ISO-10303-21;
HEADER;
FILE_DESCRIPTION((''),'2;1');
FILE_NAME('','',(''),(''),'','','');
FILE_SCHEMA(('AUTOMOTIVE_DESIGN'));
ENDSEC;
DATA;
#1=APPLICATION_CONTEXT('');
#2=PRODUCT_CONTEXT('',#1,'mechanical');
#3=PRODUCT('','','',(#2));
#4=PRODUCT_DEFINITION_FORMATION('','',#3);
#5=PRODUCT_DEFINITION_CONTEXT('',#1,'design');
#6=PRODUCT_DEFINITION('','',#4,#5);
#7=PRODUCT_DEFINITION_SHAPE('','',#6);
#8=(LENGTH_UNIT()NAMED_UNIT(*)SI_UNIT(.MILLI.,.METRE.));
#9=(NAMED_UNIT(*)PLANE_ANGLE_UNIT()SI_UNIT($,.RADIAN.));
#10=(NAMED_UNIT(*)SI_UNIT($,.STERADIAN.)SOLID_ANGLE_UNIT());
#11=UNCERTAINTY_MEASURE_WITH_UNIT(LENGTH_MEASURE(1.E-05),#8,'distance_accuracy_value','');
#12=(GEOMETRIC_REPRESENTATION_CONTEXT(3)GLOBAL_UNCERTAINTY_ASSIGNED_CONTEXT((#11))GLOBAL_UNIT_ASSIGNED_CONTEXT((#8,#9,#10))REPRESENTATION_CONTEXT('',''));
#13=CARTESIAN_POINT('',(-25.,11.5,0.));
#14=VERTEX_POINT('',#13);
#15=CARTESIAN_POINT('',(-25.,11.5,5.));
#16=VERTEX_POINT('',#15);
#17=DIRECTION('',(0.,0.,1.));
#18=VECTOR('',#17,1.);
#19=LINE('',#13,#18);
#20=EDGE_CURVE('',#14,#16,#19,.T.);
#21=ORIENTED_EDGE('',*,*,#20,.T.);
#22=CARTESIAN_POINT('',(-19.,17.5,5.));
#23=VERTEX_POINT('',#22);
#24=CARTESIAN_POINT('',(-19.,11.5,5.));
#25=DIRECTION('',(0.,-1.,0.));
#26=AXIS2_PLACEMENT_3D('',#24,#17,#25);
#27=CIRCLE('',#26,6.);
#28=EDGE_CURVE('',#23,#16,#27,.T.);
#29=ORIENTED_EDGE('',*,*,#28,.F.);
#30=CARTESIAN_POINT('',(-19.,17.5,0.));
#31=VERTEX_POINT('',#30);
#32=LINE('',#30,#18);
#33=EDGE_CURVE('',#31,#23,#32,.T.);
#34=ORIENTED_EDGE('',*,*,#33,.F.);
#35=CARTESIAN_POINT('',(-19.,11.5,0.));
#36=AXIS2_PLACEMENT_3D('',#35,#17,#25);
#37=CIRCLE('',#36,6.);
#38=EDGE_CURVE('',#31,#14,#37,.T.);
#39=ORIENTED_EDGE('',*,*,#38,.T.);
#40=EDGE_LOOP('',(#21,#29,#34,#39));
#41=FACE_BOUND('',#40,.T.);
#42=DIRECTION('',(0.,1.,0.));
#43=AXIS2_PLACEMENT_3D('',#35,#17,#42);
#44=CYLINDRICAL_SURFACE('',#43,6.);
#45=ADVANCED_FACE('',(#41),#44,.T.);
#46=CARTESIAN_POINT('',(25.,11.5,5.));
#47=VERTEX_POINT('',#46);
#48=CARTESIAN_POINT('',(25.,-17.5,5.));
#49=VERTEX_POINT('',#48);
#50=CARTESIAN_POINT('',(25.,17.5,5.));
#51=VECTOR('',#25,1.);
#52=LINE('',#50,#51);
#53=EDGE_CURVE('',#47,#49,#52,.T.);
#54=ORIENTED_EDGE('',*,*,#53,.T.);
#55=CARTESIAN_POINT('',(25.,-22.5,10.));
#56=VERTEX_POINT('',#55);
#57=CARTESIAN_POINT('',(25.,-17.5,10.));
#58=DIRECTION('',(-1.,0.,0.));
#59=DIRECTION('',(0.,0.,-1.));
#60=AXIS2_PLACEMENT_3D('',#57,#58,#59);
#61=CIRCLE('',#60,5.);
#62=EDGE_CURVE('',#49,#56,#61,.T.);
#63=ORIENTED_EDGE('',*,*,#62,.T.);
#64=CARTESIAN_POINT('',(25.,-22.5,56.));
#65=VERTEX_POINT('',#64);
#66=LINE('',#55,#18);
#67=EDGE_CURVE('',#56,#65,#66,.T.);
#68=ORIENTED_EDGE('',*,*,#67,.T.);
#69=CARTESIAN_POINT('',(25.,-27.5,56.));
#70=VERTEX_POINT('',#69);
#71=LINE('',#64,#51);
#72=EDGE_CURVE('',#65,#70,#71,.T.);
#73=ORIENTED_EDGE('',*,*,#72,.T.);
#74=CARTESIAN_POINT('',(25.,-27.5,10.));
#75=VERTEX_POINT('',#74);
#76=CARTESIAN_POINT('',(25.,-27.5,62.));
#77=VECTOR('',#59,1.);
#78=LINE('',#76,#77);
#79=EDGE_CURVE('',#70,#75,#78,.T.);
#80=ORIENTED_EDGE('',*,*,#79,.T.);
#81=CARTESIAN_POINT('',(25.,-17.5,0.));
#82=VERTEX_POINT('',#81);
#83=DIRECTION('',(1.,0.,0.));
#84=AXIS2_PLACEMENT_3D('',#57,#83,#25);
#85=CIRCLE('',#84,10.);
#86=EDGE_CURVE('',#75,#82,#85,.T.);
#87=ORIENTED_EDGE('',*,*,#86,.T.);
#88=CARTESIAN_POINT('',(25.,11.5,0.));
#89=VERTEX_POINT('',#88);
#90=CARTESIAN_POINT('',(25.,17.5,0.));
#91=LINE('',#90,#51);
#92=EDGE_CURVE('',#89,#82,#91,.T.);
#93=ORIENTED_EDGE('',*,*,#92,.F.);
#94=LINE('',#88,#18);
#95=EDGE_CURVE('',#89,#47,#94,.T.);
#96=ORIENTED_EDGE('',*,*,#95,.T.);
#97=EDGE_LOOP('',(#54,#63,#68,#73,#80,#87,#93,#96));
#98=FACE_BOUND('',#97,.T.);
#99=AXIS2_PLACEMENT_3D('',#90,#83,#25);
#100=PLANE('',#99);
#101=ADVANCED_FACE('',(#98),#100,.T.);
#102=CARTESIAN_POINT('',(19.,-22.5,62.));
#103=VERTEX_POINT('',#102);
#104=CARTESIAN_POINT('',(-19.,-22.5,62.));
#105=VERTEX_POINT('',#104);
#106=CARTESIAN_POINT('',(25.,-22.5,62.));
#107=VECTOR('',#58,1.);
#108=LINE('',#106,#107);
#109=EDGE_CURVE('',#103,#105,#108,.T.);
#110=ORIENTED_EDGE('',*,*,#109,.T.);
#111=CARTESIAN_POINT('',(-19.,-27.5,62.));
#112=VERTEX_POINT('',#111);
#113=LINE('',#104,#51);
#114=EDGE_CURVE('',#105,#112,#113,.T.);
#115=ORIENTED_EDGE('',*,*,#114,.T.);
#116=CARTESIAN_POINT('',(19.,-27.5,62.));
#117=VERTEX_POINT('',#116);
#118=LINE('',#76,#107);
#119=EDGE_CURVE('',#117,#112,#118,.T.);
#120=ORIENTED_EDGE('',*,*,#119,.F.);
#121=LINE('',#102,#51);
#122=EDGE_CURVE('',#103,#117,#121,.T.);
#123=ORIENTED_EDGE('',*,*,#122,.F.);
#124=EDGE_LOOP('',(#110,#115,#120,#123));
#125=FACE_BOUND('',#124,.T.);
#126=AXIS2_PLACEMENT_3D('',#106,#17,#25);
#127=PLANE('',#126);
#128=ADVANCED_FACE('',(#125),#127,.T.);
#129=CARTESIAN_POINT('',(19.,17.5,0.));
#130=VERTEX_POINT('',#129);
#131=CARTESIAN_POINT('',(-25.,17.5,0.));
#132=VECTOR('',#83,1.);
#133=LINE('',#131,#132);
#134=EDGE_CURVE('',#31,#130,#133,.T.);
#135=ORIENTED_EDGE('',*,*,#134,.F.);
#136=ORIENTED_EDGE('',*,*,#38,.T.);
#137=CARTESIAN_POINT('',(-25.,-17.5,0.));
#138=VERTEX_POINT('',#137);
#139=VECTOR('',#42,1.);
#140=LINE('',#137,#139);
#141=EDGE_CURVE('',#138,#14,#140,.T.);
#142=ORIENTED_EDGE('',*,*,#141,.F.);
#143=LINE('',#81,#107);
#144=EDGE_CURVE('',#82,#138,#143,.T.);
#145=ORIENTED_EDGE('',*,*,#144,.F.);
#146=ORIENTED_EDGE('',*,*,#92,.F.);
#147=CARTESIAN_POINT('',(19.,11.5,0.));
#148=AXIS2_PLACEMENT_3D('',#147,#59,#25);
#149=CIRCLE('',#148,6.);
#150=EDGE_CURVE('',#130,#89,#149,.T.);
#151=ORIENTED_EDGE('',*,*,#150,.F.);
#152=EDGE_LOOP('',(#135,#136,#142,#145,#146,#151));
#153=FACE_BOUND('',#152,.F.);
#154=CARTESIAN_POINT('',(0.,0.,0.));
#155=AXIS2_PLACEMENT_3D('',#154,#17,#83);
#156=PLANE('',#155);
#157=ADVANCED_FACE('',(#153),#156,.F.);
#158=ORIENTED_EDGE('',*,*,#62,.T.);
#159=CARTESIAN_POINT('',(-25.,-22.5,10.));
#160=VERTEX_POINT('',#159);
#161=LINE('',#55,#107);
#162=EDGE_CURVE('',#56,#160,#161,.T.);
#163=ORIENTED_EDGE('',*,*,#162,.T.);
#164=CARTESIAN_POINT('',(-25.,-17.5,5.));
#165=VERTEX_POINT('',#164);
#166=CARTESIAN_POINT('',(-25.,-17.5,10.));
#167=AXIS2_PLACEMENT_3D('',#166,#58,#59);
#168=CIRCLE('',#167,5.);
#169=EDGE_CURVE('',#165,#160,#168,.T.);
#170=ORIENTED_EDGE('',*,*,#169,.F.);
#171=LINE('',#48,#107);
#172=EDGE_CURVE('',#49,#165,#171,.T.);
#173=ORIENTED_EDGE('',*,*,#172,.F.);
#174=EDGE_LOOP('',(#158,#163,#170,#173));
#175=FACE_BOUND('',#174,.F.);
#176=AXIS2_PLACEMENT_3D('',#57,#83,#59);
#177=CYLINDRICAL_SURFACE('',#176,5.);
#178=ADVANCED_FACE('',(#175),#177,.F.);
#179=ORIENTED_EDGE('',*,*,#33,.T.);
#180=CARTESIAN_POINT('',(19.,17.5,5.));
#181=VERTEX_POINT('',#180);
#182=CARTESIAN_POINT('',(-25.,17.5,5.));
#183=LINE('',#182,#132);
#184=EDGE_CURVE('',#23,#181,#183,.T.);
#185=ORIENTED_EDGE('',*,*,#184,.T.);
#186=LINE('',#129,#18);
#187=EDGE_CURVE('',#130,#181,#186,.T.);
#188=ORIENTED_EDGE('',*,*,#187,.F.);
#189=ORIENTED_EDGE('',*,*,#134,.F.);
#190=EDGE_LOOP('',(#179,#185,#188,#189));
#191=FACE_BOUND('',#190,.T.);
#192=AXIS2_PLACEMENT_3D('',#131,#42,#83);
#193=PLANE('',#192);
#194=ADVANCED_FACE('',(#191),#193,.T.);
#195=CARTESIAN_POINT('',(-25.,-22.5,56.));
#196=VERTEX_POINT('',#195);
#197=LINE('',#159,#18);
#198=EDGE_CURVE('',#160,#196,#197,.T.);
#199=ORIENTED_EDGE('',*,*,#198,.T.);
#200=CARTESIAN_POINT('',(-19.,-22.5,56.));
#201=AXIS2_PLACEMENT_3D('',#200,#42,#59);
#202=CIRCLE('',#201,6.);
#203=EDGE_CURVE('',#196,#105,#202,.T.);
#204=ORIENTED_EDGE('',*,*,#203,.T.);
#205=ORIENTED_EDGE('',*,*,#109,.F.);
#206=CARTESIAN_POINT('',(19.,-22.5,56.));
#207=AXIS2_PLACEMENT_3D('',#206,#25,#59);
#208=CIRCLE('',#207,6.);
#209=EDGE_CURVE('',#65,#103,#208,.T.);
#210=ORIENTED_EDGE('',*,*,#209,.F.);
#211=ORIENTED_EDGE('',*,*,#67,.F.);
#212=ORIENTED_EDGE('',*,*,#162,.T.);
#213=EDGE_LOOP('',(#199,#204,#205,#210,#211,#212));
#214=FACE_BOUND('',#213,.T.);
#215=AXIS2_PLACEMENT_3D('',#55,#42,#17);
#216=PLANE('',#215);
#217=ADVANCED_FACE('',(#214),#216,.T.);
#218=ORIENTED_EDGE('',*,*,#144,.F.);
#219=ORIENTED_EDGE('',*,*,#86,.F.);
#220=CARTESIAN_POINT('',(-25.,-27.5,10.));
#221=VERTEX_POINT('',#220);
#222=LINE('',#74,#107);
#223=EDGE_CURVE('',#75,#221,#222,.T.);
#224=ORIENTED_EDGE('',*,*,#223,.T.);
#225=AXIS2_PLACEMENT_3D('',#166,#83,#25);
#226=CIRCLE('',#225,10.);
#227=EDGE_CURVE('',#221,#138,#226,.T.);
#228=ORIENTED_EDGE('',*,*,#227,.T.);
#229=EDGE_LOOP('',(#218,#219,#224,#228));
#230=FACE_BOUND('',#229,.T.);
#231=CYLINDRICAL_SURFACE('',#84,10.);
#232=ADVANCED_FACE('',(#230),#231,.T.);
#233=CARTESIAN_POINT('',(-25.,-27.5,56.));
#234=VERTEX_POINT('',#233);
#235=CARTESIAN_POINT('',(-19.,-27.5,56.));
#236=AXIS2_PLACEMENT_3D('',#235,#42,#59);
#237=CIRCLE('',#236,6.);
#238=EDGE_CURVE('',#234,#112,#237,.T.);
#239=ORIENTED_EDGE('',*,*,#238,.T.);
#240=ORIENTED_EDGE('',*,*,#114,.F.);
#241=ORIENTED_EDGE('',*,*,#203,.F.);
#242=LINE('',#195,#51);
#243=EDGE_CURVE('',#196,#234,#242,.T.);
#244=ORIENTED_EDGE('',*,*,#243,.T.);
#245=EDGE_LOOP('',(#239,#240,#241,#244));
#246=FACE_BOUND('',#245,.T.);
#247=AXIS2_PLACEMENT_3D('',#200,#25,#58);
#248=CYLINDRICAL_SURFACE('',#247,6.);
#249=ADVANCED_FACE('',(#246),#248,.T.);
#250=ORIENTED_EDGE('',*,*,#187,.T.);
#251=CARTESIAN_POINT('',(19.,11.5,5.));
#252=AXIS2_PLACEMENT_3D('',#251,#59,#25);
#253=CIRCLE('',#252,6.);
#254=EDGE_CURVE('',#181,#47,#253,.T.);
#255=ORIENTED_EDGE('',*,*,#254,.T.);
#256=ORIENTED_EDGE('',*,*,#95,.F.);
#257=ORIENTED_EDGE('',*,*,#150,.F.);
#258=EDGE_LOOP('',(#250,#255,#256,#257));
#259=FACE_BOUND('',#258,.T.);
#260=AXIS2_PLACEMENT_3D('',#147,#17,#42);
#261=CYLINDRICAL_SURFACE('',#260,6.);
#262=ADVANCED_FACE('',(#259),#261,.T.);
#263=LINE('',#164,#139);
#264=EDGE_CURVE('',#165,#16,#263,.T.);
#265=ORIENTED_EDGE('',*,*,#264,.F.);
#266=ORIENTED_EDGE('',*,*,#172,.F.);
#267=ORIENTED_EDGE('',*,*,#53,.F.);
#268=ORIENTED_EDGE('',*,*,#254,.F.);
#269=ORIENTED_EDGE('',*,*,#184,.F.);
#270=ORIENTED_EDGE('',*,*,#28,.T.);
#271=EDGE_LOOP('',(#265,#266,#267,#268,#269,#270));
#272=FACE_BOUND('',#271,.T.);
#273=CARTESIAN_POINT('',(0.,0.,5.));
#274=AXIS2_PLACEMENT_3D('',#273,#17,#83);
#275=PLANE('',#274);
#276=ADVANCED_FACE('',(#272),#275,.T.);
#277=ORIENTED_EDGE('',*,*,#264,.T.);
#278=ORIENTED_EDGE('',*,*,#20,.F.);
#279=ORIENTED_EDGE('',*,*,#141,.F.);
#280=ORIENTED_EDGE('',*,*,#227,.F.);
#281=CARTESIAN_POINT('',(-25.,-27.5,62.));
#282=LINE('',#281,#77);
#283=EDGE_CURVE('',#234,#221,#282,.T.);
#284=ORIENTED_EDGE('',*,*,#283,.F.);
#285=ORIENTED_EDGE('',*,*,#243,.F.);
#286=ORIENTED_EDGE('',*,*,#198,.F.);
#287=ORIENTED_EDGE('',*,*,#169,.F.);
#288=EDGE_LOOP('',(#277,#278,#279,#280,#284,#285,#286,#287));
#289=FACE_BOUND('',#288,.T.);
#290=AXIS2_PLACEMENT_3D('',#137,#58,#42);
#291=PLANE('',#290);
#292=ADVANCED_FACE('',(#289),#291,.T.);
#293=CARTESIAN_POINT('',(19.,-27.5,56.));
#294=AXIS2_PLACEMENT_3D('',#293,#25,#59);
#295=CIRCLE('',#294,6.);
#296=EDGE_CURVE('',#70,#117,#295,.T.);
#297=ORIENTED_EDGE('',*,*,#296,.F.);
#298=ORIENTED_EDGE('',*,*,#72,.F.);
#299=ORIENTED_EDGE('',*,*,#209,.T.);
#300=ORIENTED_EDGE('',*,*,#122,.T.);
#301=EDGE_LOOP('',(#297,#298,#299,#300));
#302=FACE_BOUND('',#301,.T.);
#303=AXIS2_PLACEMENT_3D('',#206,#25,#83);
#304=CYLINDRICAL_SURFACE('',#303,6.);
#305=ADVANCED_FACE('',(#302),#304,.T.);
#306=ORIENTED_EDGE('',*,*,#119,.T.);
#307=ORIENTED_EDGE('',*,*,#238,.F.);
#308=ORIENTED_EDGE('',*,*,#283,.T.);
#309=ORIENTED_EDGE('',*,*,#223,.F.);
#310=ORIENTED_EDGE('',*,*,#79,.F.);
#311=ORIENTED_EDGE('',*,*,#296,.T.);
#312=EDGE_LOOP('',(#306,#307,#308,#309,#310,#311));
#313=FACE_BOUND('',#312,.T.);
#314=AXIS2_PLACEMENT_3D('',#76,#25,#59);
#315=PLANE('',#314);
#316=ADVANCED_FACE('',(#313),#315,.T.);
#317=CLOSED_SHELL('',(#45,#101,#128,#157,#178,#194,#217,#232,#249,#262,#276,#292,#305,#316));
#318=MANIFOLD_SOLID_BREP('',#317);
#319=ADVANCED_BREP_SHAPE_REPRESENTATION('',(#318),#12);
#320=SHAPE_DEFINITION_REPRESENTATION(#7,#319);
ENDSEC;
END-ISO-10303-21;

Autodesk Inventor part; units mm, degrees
ref_plane "YZ Plane" through (0, 0, 0) normal (1, 0, 0) x (0, 1, 0)
ref_plane "XZ Plane" through (0, 0, 0) normal (0, 1, 0) x (-1, 0, 0)
ref_plane "XY Plane" through (0, 0, 0) normal (0, 0, 1) x (1, 0, 0)
sketch "Schizzo1" plane through (0, 0, 0) normal (0, 0, 1) x (1, 0, 0)
  line L0 (-25, 17.5) -> (25, 17.5)
  line L1 (25, 17.5) -> (25, -17.5)
  line L2 (25, -17.5) -> (-25, -17.5)
  line L3 (-25, -17.5) -> (-25, 17.5)
  line L4 (-25, 17.5) -> (25, -17.5) construction
  line L5 (25, 17.5) -> (-25, -17.5) construction
  point P0 (0, 0)
  dimension "d0" = 50
  dimension "d1" = 35
extrude "Piano1" add sketch "Schizzo1" along normal blind 5
sketch "Schizzo2" plane through (25, -22.5, 10) normal (0, -1, 0) x (1, 0, 0)
  line L0 (-50, 0) -> (0, 0)
  line L1 (0, 0) -> (0, 52)
  line L2 (0, 52) -> (-50, 52)
  line L3 (-50, 52) -> (-50, 0)
edge flange "Flangia1" height 62 angle 90 thickness 5 bend radius 5 thickness toward (0, -1, 0) relief tear relief width 5 relief depth 2.5 edges at (0, -17.5, 5) wall of the first edge with corners at (-25, -22.5, 10) (25, -22.5, 10) (25, -22.5, 62) (-25, -22.5, 62)
bend "Piega (Bend)1"
corner "Angolo1"
fillet "Arrotondamento angolo1" radius 6 4 edges at (-25, 17.5, 2.5) (25, 17.5, 2.5) (25, -25, 62) (-25, -25, 62)
equation "\"d2\" = Spessore"
equation "\"d3\" = LarghezzaScaricoPiega"
equation "\"d4\" = ProfonditàScaricoPiega"
equation "\"d5\" = ResiduoMinimo"
equation "\"d6\" = RaggioTransizione"
equation "\"d9\" = RaggioPiega"
equation "\"d10\" = DimensioniScaricoAngolo"
equation "\"d11\" = DimensioneGioco"
equation "\"d12\" = Dimensione_raggio_Jacobi"
equation "\"RaggioPiega\" = Spessore"
equation "\"LarghezzaScaricoPiega\" = Spessore"
equation "\"ProfonditàScaricoPiega\" = 0.5 * Spessore"
equation "\"RaggioTransizione\" = RaggioPiega"
equation "\"Dimensione_raggio_Jacobi\" = RaggioPiega"
equation "\"DimensioneGioco\" = Spessore"
equation "\"Spessore\" = 5"
equation "\"ResiduoMinimo\" = 10"
equation "\"DimensioniScaricoAngolo\" = 20"
properties part number "Lamiera 10mm supporto asse"
